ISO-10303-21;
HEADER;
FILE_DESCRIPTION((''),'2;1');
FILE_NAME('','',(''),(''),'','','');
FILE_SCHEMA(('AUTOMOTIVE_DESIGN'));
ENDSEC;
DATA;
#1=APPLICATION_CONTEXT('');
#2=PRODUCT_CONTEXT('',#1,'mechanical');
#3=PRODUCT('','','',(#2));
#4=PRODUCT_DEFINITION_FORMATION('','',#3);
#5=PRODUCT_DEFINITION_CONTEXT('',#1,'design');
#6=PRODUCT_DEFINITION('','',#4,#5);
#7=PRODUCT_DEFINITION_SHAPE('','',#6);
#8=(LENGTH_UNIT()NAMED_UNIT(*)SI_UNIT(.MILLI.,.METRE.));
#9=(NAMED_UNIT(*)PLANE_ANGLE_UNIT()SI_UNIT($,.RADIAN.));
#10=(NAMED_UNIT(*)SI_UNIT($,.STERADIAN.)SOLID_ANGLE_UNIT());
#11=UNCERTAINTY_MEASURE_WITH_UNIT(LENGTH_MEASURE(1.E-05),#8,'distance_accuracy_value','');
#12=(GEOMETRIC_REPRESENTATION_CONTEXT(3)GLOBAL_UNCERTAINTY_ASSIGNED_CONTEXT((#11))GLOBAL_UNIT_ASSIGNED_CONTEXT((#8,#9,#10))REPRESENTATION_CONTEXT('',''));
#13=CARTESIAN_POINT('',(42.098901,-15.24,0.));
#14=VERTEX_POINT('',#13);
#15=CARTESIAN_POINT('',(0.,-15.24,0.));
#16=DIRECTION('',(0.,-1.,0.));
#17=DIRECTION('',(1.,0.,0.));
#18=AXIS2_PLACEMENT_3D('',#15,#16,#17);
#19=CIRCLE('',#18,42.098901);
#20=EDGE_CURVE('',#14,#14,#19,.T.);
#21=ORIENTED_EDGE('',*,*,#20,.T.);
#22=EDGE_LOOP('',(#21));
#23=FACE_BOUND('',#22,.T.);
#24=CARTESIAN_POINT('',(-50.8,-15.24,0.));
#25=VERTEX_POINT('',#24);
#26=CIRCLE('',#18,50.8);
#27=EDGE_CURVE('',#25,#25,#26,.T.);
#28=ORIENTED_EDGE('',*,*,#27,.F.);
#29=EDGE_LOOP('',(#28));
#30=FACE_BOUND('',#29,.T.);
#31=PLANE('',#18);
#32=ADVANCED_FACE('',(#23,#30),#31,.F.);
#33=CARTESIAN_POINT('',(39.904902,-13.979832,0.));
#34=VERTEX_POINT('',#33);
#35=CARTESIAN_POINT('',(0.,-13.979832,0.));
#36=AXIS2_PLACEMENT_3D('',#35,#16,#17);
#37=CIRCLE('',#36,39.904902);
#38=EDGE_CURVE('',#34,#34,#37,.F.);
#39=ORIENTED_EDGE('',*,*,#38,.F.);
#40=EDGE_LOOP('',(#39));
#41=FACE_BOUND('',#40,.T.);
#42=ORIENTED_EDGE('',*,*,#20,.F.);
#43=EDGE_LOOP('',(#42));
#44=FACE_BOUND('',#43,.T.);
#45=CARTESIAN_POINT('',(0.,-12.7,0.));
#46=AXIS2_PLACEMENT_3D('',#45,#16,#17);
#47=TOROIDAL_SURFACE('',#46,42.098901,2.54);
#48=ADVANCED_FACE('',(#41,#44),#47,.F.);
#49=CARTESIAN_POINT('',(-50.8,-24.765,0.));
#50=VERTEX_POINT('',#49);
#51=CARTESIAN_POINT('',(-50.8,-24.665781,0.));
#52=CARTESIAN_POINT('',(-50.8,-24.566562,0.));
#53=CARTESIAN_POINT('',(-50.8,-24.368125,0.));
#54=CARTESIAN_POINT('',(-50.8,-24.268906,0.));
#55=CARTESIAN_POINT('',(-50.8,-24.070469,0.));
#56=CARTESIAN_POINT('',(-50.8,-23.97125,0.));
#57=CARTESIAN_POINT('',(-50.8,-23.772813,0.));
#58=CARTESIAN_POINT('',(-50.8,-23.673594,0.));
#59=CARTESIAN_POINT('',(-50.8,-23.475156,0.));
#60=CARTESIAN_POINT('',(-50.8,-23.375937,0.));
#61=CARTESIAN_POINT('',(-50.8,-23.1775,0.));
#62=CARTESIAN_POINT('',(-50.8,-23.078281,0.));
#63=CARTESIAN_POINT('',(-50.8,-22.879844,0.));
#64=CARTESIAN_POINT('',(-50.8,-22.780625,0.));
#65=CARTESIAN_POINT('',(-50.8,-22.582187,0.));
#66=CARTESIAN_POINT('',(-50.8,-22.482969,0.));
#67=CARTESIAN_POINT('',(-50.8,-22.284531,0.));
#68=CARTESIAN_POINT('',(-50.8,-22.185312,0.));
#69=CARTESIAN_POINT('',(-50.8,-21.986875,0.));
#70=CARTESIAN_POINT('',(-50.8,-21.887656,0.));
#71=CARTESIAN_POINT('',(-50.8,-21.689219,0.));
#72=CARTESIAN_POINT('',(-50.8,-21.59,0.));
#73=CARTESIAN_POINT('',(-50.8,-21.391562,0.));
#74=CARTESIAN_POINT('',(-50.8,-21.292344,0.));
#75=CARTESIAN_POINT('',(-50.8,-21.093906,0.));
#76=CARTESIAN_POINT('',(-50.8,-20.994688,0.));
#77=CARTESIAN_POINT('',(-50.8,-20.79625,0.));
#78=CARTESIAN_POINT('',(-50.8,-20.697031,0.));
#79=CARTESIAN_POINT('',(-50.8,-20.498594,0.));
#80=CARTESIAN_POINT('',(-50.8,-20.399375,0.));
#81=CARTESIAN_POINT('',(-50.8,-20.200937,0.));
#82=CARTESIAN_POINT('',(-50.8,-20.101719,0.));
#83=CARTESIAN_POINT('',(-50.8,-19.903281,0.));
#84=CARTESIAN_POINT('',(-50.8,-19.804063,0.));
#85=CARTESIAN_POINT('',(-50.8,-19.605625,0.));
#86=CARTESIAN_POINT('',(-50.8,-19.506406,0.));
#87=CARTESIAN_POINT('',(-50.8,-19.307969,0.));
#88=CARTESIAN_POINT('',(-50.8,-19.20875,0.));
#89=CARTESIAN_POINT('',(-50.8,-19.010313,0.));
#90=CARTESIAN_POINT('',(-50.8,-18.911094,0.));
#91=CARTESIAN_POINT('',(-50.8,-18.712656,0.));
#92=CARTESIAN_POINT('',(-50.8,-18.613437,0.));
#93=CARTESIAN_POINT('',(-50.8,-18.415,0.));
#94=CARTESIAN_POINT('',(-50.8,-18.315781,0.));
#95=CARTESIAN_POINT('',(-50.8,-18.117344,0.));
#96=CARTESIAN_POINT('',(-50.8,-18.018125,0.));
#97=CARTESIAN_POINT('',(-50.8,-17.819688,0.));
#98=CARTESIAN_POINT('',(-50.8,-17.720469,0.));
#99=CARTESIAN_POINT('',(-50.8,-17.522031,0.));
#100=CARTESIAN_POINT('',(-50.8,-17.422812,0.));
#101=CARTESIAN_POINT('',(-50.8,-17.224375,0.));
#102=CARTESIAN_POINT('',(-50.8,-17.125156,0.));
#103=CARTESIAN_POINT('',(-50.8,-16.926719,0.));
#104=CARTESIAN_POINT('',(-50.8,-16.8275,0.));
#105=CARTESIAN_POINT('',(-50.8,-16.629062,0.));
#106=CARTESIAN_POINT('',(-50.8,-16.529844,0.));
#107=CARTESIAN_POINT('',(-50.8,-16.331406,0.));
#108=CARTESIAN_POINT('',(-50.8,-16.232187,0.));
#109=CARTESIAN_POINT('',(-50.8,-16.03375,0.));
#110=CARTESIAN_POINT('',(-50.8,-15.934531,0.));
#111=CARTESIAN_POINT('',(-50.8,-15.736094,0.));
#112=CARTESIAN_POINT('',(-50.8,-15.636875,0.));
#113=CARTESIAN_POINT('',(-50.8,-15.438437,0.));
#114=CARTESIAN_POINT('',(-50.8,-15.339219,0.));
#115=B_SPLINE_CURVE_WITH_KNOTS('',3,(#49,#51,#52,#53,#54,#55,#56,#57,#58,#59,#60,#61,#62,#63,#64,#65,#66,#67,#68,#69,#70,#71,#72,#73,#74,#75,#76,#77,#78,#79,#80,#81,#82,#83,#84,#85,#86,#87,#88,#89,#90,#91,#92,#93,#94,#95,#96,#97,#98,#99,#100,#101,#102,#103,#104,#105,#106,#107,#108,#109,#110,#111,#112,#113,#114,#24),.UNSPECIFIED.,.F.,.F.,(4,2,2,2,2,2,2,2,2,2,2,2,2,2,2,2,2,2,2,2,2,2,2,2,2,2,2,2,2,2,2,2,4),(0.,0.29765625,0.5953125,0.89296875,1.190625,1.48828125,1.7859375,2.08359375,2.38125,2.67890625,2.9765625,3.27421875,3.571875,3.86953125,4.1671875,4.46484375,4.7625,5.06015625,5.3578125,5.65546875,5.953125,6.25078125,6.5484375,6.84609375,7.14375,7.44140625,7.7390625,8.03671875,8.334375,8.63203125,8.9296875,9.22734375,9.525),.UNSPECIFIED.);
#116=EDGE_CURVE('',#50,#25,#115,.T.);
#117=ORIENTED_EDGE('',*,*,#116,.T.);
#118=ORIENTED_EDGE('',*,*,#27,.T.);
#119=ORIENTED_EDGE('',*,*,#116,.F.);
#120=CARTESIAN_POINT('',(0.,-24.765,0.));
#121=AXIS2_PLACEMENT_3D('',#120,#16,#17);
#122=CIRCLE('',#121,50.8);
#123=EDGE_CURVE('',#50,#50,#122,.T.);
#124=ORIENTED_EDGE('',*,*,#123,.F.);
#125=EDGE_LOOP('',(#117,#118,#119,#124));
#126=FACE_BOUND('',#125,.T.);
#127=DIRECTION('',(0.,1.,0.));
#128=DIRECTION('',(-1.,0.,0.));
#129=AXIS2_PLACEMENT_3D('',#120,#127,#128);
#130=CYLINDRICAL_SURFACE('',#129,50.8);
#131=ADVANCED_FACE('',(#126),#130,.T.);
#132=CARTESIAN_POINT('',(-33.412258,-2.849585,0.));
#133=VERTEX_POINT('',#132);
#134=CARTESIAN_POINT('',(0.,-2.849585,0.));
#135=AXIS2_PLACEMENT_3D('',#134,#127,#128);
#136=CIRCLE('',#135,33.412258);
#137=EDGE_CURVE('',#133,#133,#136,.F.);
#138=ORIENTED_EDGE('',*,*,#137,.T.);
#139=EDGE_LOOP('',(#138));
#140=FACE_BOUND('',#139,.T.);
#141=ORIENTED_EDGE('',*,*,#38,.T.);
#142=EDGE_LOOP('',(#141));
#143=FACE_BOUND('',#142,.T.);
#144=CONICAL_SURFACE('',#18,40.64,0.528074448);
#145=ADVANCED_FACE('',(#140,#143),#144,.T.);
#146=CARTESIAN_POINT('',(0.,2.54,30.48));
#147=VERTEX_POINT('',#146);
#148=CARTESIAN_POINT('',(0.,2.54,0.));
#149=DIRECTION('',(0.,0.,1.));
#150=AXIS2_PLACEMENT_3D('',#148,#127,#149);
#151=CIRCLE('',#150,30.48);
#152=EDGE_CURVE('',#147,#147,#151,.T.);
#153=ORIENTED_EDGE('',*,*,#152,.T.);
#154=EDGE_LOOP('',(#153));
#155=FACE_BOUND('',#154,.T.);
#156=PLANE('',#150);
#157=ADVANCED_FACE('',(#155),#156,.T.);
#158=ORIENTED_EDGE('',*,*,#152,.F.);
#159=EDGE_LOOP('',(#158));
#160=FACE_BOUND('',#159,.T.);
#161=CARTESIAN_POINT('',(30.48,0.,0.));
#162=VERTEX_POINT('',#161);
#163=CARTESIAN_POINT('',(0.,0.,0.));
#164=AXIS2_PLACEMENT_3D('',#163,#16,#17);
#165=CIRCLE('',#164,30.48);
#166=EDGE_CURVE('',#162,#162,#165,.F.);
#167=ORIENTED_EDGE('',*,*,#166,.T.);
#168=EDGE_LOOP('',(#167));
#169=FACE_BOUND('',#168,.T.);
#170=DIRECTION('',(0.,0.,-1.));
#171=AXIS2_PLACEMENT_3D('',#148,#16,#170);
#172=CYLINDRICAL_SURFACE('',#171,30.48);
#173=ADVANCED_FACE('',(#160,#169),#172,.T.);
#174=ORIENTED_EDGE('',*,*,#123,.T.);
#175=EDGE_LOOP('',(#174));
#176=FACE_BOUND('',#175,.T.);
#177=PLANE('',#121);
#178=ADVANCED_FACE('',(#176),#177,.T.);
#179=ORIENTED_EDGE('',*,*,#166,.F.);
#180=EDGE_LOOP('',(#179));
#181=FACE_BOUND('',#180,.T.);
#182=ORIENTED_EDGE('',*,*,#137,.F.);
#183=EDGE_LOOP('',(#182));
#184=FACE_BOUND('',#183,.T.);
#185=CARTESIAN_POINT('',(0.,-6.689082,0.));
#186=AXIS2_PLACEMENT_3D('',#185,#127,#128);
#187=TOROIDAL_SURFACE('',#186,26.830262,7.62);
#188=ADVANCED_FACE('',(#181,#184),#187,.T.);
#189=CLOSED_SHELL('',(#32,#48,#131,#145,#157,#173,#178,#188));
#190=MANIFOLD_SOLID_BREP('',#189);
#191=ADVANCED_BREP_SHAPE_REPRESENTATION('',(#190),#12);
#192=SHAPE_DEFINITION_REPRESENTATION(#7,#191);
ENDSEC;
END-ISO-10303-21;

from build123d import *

# Parameters (mm, degrees)
SKETCH3_R           = 30.48
BOSS_EXTRUDE1_DEPTH = 2.54
SKETCH6_R           = 50.8
BOSS_EXTRUDE2_DEPTH = 9.525
FILLET2_R           = 2.54
FILLET1_R           = 7.62


with BuildPart() as part:
    # Sketch1 → Revolve1 (revolve)
    with BuildSketch(Plane.XY, mode=Mode.PRIVATE) as revolve1_sk:
        Polygon((0, 0), (0, -15.24), (40.64, -15.24), (31.75, 0), align=None)
    revolve(revolve1_sk.sketch.rotate(Axis((0, 0, 0), (0, -1, 0)), 180), axis=Axis((0, 0, 0), (0, -1, 0)))

    # Sketch3 → Boss-Extrude1 (add)
    with BuildSketch(Plane(origin=(0, 0, 0), x_dir=(1, 0, 0), z_dir=(0, 1, 0))):
        Circle(SKETCH3_R)
    extrude(amount=BOSS_EXTRUDE1_DEPTH)

    # Sketch6 → Boss-Extrude2 (add)
    with BuildSketch(Plane.XZ.offset(15.24)):
        with Locations(Location((0, 0, 0), (0, 0, 180))):
            Circle(SKETCH6_R)
    extrude(amount=BOSS_EXTRUDE2_DEPTH)

    # Fillet2
    fillet2_edges = [part.edges().sort_by_distance(p)[0] for p in [
        (40.64, -15.24, 0),
    ]]
    fillet(fillet2_edges, radius=FILLET2_R)

    # Fillet1
    # the kernel refuses this fillet: 7.62 mm, written as the material it takes off along each edge
    with BuildSketch(Plane(origin=(0, 0, 0), x_dir=(-1, 0, 0), z_dir=(0, 0, 1))) as fillet1_piece_1:
        with BuildLine():
            CenterArc((26.830262481, 6.689081854), FILLET1_R, 298.618033777, 31.125529059)
            Line((30.48, 0), (30.55299475, -0.133781637))
            ThreePointArc((30.55299475, -0.133781637), (31.115, -0.1524), (31.75, -0.1524))
            Line((31.75, -0.1524), (31.881639904, -0.076789944))
            Line((31.881639904, -0.076789944), (33.543897611, 2.772794695))
            Line((33.543897611, 2.772794695), (33.412257706, 2.849584639))
        make_face()
    revolve(axis=Axis((0, 0, 0), (0, -1, 0)), mode=Mode.SUBTRACT)


solid = part.part
